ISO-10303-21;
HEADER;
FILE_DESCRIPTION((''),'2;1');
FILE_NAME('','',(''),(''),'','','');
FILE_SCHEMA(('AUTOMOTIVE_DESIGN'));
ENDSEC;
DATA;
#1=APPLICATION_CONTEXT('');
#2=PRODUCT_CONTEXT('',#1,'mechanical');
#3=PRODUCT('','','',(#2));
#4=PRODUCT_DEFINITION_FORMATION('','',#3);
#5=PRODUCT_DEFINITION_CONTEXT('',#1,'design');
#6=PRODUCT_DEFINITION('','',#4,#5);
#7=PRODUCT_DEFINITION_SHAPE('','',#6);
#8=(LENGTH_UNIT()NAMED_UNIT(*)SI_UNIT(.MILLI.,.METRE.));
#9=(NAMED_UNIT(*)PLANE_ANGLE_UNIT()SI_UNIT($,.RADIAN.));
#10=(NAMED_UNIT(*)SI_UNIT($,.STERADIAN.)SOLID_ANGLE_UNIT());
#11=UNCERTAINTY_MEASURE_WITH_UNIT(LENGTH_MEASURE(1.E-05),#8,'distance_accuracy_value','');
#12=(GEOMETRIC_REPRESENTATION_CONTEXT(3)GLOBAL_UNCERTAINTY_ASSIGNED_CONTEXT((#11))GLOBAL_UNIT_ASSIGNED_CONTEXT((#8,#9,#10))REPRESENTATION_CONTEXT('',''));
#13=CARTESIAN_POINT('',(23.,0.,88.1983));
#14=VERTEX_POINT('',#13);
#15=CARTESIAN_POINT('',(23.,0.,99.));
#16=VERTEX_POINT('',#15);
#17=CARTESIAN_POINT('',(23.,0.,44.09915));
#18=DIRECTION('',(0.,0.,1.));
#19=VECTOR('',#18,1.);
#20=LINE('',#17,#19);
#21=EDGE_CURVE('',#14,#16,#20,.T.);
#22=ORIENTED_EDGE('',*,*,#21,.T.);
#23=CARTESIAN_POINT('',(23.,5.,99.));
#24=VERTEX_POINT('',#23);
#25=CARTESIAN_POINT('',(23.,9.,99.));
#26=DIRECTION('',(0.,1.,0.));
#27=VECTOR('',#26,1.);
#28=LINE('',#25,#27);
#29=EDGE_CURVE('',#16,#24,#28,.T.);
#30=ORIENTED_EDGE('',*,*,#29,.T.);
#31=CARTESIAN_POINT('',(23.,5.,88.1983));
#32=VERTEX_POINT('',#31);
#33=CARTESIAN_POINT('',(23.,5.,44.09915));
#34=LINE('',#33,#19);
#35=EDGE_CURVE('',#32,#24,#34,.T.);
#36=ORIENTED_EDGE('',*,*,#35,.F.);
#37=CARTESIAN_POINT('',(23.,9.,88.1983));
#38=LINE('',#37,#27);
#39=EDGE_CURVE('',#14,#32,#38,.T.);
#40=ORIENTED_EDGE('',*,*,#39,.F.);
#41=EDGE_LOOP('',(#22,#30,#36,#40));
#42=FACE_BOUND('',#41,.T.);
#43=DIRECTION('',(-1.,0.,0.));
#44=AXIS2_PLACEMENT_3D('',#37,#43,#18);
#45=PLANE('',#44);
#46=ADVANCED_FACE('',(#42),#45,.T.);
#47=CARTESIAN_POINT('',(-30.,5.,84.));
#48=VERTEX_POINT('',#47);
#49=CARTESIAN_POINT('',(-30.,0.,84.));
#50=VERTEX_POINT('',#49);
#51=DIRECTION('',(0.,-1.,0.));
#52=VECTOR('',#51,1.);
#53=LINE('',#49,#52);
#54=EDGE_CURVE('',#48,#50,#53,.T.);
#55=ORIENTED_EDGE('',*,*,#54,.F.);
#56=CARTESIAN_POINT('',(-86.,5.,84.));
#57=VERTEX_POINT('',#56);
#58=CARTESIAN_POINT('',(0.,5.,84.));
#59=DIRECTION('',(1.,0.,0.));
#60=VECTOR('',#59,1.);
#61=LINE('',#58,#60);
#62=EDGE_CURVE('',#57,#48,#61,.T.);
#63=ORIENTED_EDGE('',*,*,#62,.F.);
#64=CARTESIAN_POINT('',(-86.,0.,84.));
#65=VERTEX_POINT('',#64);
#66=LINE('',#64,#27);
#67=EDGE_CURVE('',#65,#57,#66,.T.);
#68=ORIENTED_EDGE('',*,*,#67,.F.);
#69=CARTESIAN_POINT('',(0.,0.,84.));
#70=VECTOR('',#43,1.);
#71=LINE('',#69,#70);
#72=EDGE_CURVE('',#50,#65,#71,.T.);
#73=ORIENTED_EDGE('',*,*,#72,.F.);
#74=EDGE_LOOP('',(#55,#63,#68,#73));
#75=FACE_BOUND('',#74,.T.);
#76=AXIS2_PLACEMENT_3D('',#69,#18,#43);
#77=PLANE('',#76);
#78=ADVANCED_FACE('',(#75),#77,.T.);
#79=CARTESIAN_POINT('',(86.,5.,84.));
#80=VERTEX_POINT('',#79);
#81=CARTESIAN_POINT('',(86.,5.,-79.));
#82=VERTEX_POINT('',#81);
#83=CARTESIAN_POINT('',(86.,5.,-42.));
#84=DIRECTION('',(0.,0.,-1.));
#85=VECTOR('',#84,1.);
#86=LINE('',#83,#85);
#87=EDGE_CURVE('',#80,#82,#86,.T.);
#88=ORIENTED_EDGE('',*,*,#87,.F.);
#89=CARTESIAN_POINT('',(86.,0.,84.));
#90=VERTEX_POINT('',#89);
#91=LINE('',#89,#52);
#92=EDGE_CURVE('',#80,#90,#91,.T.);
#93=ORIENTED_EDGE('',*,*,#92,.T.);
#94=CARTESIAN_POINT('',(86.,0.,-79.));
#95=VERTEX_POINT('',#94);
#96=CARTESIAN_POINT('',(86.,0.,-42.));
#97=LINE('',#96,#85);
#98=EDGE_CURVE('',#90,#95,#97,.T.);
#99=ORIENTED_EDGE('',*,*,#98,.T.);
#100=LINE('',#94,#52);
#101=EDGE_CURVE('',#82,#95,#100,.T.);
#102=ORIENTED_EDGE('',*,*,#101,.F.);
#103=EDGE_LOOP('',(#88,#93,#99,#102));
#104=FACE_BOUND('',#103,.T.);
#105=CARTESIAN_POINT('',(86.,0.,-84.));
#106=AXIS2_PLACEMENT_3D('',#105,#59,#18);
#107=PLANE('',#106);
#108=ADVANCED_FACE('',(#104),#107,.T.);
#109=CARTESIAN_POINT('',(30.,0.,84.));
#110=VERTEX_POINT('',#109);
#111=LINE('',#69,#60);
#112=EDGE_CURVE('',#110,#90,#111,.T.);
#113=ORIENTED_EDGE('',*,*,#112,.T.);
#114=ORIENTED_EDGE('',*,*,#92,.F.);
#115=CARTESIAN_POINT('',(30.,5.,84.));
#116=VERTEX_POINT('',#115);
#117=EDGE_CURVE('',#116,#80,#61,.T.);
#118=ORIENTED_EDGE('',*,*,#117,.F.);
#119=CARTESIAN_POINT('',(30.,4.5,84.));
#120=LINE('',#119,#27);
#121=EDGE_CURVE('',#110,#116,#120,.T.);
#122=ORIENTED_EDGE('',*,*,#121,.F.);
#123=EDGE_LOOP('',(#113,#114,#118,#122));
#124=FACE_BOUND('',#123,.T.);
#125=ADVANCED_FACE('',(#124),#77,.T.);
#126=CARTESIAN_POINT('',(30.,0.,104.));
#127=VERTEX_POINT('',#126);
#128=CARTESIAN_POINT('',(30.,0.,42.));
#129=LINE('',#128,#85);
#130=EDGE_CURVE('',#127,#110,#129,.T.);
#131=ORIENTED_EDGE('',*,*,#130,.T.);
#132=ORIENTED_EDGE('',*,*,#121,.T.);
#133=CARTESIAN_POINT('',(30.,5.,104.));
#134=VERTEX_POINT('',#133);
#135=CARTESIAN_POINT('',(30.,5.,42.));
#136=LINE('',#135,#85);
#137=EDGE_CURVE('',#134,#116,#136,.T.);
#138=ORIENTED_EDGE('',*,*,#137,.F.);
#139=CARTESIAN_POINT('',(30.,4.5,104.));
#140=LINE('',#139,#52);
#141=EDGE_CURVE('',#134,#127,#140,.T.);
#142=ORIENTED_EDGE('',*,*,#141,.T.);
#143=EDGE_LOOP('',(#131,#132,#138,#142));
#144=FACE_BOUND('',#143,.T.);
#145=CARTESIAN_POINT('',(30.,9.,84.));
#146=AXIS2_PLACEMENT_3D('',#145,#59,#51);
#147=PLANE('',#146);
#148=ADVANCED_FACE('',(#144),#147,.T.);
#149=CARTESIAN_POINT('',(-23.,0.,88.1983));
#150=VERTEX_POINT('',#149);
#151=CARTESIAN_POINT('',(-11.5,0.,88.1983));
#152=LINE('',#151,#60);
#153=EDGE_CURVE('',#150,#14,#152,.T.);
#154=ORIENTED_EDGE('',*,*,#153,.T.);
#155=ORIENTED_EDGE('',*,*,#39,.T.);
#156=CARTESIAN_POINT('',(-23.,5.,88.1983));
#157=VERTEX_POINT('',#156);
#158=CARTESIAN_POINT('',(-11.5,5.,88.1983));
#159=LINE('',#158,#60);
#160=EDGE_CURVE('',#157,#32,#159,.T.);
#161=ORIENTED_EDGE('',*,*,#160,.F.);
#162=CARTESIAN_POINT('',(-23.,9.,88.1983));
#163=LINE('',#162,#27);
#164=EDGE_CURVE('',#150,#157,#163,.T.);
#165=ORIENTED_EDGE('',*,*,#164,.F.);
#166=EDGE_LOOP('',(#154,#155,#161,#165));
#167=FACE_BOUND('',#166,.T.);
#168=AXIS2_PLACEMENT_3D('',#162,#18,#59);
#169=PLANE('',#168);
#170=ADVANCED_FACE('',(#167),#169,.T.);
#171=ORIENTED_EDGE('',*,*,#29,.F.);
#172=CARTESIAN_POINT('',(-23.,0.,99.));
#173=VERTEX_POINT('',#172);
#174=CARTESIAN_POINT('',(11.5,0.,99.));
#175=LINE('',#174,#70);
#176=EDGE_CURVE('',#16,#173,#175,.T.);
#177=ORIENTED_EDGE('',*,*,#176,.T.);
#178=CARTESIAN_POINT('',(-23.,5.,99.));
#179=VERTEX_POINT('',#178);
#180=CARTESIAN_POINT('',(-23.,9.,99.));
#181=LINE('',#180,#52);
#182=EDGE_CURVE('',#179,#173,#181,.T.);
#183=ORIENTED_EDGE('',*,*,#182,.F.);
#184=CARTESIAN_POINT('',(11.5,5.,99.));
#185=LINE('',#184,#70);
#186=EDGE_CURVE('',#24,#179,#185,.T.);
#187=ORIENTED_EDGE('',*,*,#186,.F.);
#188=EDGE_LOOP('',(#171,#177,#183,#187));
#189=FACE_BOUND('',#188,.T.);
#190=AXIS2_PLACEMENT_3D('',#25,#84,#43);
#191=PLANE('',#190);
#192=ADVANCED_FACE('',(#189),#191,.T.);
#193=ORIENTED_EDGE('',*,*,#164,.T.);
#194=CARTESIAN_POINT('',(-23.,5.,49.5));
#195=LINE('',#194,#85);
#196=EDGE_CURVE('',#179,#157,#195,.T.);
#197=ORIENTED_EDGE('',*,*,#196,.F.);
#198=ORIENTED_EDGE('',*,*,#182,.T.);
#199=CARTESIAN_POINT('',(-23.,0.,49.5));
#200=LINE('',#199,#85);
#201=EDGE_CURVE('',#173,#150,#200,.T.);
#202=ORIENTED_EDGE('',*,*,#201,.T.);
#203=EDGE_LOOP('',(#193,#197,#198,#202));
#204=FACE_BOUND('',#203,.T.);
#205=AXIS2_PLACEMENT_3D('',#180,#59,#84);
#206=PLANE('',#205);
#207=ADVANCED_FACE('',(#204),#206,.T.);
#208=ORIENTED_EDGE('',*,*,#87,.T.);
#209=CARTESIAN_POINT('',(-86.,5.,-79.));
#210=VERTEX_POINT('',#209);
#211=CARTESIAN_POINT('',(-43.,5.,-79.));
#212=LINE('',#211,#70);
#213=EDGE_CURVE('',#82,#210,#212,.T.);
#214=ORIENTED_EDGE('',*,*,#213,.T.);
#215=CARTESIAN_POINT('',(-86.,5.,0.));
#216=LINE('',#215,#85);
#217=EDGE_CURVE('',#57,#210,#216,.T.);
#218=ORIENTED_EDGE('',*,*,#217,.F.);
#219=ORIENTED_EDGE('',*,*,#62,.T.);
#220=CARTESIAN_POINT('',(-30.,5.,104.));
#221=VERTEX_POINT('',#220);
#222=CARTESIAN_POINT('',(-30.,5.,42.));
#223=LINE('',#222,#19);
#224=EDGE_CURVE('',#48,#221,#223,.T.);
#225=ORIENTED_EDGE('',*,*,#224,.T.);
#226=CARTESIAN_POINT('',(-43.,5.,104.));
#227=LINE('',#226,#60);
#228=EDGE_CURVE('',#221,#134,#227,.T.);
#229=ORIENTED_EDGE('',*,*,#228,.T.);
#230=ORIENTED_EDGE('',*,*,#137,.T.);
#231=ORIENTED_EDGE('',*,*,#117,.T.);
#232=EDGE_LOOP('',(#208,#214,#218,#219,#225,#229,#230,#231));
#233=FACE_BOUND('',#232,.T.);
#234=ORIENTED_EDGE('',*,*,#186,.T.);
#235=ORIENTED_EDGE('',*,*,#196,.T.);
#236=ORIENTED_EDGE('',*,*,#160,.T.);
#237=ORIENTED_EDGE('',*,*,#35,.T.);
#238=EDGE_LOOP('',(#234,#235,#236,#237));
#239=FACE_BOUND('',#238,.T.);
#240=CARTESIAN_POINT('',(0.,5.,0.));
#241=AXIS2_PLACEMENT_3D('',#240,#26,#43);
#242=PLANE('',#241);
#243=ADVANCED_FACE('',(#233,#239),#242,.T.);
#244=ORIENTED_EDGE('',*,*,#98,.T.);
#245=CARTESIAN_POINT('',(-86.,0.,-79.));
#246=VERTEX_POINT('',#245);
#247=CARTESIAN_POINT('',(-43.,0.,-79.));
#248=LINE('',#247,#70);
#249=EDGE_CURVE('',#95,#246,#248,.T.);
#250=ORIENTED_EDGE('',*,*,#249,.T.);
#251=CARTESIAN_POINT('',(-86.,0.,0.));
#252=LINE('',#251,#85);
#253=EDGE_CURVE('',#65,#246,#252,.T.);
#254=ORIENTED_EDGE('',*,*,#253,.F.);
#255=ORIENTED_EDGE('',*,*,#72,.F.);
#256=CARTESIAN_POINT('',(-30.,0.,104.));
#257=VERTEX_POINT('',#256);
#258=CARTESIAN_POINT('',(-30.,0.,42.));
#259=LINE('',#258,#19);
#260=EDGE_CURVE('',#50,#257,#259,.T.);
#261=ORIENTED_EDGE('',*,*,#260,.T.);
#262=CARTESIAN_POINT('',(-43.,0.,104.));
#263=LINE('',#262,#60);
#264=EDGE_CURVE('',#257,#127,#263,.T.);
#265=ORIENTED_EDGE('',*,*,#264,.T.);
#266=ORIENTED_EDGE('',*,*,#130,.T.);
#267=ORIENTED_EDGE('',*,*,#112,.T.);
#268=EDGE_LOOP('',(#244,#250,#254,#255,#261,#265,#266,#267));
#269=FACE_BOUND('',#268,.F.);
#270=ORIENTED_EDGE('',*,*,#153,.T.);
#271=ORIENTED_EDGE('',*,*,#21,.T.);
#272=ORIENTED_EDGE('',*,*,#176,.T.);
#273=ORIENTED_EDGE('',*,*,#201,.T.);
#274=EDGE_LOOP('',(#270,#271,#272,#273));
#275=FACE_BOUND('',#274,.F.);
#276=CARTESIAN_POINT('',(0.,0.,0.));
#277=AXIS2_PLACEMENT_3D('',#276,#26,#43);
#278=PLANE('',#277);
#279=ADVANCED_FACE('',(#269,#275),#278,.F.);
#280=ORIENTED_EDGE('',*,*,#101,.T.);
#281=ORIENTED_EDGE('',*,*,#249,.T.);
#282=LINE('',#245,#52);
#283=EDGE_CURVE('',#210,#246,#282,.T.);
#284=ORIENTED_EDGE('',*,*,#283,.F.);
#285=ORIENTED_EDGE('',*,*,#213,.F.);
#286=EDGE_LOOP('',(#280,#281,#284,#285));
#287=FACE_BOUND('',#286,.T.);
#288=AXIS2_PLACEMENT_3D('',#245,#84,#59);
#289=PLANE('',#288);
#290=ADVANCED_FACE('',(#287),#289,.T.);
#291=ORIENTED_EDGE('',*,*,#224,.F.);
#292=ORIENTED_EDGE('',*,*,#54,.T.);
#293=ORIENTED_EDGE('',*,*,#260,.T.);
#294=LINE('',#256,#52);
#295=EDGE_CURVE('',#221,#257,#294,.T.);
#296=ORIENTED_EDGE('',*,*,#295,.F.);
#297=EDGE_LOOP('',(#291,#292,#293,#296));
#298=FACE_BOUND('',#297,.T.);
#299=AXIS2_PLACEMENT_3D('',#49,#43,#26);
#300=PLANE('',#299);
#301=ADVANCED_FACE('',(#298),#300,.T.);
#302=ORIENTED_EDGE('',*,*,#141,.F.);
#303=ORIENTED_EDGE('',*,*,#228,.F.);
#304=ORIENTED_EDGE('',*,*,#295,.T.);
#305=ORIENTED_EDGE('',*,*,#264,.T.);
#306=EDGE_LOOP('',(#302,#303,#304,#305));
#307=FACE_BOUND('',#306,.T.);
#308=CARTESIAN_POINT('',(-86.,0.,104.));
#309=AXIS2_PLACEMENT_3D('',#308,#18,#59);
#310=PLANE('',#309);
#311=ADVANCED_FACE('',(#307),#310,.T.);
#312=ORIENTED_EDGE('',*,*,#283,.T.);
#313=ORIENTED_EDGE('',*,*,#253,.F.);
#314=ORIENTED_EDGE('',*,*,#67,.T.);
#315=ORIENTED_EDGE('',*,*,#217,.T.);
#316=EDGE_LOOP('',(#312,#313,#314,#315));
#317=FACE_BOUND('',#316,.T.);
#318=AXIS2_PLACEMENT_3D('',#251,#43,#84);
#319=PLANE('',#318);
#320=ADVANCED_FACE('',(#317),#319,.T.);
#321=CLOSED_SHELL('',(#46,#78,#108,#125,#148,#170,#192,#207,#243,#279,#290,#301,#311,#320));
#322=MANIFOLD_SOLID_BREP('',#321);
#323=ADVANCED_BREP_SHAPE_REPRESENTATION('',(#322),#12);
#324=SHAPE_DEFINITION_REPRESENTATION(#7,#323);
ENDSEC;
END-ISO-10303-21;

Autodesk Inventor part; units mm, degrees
ref_plane "YZ Plane" through (0, 0, 0) normal (1, 0, 0) x (0, 1, 0)
ref_plane "XZ Plane" through (0, 0, 0) normal (0, 1, 0) x (-1, 0, 0)
ref_plane "XY Plane" through (0, 0, 0) normal (0, 0, 1) x (1, 0, 0)
sketch "Sketch1" plane through (0, 0, 0) normal (0, 1, 0) x (-1, 0, 0)
  line L0 (120.4, 0) -> (-120.4, 0) projected
  line L1 (0, -117.6) -> (0, 117.6) projected
  line L2 (-86, 84) -> (86, 84)
  line L3 (86, 84) -> (86, -84)
  line L4 (86, -84) -> (-86, -84)
  line L5 (-86, -84) -> (-86, 84)
  line L6 (-86, 84) -> (86, -84) construction
  line L7 (86, 84) -> (-86, -84) construction
  point P0 (0, 0)
  dimension "d0" = 172
  dimension "d1" = 168
extrude "Extrusion1" add sketch "Sketch1" along normal blind 9
sketch "Sketch2" plane through (-86, 0, 84) normal (0, 0, 1) x (1, 0, 0)
  line L0 (172, 9) -> (0, 9) projected
  line L1 (172, 0) -> (0, 0) projected
  line L2 (56, 9) -> (116, 9)
  line L3 (116, 9) -> (116, 0)
  line L4 (116, 0) -> (56, 0)
  line L5 (56, 0) -> (56, 9)
  point P0 (86, 0)
  dimension "d4" = 60
  dimension "d5" = 30
extrude "Extrusion2" add sketch "Sketch2" along normal blind 20
sketch "Sketch3" plane through (0, 9, 0) normal (0, 1, 0) x (1, 0, 0)
  line L0 (-23, -88.1983) -> (23, -88.1983)
  line L1 (23, -88.1983) -> (23, -99)
  line L2 (23, -99) -> (-23, -99)
  line L3 (-23, -99) -> (-23, -88.1983)
  line L4 (30, -84) -> (30, -104) projected
  line L5 (30, -104) -> (-30, -104) projected
  line L6 (-30, -84) -> (-30, -104) projected
  line L7 (30, -84) -> (86, -84) projected
  point P0 (0, 0)
  dimension "d8" = 7
  dimension "d9" = 5
  dimension "d10" = 7
  dimension "d11" = 4.1983
extrude "Extrusion3" cut sketch "Sketch3" against normal blind 20
move faces "Move1" translate (0, -4, 0) faces at (-10, 9, -28)
move faces "Move2" translate (0, 0, 5) faces at (28.6667, 1.6667, -84)
properties part number "pokrywa"
